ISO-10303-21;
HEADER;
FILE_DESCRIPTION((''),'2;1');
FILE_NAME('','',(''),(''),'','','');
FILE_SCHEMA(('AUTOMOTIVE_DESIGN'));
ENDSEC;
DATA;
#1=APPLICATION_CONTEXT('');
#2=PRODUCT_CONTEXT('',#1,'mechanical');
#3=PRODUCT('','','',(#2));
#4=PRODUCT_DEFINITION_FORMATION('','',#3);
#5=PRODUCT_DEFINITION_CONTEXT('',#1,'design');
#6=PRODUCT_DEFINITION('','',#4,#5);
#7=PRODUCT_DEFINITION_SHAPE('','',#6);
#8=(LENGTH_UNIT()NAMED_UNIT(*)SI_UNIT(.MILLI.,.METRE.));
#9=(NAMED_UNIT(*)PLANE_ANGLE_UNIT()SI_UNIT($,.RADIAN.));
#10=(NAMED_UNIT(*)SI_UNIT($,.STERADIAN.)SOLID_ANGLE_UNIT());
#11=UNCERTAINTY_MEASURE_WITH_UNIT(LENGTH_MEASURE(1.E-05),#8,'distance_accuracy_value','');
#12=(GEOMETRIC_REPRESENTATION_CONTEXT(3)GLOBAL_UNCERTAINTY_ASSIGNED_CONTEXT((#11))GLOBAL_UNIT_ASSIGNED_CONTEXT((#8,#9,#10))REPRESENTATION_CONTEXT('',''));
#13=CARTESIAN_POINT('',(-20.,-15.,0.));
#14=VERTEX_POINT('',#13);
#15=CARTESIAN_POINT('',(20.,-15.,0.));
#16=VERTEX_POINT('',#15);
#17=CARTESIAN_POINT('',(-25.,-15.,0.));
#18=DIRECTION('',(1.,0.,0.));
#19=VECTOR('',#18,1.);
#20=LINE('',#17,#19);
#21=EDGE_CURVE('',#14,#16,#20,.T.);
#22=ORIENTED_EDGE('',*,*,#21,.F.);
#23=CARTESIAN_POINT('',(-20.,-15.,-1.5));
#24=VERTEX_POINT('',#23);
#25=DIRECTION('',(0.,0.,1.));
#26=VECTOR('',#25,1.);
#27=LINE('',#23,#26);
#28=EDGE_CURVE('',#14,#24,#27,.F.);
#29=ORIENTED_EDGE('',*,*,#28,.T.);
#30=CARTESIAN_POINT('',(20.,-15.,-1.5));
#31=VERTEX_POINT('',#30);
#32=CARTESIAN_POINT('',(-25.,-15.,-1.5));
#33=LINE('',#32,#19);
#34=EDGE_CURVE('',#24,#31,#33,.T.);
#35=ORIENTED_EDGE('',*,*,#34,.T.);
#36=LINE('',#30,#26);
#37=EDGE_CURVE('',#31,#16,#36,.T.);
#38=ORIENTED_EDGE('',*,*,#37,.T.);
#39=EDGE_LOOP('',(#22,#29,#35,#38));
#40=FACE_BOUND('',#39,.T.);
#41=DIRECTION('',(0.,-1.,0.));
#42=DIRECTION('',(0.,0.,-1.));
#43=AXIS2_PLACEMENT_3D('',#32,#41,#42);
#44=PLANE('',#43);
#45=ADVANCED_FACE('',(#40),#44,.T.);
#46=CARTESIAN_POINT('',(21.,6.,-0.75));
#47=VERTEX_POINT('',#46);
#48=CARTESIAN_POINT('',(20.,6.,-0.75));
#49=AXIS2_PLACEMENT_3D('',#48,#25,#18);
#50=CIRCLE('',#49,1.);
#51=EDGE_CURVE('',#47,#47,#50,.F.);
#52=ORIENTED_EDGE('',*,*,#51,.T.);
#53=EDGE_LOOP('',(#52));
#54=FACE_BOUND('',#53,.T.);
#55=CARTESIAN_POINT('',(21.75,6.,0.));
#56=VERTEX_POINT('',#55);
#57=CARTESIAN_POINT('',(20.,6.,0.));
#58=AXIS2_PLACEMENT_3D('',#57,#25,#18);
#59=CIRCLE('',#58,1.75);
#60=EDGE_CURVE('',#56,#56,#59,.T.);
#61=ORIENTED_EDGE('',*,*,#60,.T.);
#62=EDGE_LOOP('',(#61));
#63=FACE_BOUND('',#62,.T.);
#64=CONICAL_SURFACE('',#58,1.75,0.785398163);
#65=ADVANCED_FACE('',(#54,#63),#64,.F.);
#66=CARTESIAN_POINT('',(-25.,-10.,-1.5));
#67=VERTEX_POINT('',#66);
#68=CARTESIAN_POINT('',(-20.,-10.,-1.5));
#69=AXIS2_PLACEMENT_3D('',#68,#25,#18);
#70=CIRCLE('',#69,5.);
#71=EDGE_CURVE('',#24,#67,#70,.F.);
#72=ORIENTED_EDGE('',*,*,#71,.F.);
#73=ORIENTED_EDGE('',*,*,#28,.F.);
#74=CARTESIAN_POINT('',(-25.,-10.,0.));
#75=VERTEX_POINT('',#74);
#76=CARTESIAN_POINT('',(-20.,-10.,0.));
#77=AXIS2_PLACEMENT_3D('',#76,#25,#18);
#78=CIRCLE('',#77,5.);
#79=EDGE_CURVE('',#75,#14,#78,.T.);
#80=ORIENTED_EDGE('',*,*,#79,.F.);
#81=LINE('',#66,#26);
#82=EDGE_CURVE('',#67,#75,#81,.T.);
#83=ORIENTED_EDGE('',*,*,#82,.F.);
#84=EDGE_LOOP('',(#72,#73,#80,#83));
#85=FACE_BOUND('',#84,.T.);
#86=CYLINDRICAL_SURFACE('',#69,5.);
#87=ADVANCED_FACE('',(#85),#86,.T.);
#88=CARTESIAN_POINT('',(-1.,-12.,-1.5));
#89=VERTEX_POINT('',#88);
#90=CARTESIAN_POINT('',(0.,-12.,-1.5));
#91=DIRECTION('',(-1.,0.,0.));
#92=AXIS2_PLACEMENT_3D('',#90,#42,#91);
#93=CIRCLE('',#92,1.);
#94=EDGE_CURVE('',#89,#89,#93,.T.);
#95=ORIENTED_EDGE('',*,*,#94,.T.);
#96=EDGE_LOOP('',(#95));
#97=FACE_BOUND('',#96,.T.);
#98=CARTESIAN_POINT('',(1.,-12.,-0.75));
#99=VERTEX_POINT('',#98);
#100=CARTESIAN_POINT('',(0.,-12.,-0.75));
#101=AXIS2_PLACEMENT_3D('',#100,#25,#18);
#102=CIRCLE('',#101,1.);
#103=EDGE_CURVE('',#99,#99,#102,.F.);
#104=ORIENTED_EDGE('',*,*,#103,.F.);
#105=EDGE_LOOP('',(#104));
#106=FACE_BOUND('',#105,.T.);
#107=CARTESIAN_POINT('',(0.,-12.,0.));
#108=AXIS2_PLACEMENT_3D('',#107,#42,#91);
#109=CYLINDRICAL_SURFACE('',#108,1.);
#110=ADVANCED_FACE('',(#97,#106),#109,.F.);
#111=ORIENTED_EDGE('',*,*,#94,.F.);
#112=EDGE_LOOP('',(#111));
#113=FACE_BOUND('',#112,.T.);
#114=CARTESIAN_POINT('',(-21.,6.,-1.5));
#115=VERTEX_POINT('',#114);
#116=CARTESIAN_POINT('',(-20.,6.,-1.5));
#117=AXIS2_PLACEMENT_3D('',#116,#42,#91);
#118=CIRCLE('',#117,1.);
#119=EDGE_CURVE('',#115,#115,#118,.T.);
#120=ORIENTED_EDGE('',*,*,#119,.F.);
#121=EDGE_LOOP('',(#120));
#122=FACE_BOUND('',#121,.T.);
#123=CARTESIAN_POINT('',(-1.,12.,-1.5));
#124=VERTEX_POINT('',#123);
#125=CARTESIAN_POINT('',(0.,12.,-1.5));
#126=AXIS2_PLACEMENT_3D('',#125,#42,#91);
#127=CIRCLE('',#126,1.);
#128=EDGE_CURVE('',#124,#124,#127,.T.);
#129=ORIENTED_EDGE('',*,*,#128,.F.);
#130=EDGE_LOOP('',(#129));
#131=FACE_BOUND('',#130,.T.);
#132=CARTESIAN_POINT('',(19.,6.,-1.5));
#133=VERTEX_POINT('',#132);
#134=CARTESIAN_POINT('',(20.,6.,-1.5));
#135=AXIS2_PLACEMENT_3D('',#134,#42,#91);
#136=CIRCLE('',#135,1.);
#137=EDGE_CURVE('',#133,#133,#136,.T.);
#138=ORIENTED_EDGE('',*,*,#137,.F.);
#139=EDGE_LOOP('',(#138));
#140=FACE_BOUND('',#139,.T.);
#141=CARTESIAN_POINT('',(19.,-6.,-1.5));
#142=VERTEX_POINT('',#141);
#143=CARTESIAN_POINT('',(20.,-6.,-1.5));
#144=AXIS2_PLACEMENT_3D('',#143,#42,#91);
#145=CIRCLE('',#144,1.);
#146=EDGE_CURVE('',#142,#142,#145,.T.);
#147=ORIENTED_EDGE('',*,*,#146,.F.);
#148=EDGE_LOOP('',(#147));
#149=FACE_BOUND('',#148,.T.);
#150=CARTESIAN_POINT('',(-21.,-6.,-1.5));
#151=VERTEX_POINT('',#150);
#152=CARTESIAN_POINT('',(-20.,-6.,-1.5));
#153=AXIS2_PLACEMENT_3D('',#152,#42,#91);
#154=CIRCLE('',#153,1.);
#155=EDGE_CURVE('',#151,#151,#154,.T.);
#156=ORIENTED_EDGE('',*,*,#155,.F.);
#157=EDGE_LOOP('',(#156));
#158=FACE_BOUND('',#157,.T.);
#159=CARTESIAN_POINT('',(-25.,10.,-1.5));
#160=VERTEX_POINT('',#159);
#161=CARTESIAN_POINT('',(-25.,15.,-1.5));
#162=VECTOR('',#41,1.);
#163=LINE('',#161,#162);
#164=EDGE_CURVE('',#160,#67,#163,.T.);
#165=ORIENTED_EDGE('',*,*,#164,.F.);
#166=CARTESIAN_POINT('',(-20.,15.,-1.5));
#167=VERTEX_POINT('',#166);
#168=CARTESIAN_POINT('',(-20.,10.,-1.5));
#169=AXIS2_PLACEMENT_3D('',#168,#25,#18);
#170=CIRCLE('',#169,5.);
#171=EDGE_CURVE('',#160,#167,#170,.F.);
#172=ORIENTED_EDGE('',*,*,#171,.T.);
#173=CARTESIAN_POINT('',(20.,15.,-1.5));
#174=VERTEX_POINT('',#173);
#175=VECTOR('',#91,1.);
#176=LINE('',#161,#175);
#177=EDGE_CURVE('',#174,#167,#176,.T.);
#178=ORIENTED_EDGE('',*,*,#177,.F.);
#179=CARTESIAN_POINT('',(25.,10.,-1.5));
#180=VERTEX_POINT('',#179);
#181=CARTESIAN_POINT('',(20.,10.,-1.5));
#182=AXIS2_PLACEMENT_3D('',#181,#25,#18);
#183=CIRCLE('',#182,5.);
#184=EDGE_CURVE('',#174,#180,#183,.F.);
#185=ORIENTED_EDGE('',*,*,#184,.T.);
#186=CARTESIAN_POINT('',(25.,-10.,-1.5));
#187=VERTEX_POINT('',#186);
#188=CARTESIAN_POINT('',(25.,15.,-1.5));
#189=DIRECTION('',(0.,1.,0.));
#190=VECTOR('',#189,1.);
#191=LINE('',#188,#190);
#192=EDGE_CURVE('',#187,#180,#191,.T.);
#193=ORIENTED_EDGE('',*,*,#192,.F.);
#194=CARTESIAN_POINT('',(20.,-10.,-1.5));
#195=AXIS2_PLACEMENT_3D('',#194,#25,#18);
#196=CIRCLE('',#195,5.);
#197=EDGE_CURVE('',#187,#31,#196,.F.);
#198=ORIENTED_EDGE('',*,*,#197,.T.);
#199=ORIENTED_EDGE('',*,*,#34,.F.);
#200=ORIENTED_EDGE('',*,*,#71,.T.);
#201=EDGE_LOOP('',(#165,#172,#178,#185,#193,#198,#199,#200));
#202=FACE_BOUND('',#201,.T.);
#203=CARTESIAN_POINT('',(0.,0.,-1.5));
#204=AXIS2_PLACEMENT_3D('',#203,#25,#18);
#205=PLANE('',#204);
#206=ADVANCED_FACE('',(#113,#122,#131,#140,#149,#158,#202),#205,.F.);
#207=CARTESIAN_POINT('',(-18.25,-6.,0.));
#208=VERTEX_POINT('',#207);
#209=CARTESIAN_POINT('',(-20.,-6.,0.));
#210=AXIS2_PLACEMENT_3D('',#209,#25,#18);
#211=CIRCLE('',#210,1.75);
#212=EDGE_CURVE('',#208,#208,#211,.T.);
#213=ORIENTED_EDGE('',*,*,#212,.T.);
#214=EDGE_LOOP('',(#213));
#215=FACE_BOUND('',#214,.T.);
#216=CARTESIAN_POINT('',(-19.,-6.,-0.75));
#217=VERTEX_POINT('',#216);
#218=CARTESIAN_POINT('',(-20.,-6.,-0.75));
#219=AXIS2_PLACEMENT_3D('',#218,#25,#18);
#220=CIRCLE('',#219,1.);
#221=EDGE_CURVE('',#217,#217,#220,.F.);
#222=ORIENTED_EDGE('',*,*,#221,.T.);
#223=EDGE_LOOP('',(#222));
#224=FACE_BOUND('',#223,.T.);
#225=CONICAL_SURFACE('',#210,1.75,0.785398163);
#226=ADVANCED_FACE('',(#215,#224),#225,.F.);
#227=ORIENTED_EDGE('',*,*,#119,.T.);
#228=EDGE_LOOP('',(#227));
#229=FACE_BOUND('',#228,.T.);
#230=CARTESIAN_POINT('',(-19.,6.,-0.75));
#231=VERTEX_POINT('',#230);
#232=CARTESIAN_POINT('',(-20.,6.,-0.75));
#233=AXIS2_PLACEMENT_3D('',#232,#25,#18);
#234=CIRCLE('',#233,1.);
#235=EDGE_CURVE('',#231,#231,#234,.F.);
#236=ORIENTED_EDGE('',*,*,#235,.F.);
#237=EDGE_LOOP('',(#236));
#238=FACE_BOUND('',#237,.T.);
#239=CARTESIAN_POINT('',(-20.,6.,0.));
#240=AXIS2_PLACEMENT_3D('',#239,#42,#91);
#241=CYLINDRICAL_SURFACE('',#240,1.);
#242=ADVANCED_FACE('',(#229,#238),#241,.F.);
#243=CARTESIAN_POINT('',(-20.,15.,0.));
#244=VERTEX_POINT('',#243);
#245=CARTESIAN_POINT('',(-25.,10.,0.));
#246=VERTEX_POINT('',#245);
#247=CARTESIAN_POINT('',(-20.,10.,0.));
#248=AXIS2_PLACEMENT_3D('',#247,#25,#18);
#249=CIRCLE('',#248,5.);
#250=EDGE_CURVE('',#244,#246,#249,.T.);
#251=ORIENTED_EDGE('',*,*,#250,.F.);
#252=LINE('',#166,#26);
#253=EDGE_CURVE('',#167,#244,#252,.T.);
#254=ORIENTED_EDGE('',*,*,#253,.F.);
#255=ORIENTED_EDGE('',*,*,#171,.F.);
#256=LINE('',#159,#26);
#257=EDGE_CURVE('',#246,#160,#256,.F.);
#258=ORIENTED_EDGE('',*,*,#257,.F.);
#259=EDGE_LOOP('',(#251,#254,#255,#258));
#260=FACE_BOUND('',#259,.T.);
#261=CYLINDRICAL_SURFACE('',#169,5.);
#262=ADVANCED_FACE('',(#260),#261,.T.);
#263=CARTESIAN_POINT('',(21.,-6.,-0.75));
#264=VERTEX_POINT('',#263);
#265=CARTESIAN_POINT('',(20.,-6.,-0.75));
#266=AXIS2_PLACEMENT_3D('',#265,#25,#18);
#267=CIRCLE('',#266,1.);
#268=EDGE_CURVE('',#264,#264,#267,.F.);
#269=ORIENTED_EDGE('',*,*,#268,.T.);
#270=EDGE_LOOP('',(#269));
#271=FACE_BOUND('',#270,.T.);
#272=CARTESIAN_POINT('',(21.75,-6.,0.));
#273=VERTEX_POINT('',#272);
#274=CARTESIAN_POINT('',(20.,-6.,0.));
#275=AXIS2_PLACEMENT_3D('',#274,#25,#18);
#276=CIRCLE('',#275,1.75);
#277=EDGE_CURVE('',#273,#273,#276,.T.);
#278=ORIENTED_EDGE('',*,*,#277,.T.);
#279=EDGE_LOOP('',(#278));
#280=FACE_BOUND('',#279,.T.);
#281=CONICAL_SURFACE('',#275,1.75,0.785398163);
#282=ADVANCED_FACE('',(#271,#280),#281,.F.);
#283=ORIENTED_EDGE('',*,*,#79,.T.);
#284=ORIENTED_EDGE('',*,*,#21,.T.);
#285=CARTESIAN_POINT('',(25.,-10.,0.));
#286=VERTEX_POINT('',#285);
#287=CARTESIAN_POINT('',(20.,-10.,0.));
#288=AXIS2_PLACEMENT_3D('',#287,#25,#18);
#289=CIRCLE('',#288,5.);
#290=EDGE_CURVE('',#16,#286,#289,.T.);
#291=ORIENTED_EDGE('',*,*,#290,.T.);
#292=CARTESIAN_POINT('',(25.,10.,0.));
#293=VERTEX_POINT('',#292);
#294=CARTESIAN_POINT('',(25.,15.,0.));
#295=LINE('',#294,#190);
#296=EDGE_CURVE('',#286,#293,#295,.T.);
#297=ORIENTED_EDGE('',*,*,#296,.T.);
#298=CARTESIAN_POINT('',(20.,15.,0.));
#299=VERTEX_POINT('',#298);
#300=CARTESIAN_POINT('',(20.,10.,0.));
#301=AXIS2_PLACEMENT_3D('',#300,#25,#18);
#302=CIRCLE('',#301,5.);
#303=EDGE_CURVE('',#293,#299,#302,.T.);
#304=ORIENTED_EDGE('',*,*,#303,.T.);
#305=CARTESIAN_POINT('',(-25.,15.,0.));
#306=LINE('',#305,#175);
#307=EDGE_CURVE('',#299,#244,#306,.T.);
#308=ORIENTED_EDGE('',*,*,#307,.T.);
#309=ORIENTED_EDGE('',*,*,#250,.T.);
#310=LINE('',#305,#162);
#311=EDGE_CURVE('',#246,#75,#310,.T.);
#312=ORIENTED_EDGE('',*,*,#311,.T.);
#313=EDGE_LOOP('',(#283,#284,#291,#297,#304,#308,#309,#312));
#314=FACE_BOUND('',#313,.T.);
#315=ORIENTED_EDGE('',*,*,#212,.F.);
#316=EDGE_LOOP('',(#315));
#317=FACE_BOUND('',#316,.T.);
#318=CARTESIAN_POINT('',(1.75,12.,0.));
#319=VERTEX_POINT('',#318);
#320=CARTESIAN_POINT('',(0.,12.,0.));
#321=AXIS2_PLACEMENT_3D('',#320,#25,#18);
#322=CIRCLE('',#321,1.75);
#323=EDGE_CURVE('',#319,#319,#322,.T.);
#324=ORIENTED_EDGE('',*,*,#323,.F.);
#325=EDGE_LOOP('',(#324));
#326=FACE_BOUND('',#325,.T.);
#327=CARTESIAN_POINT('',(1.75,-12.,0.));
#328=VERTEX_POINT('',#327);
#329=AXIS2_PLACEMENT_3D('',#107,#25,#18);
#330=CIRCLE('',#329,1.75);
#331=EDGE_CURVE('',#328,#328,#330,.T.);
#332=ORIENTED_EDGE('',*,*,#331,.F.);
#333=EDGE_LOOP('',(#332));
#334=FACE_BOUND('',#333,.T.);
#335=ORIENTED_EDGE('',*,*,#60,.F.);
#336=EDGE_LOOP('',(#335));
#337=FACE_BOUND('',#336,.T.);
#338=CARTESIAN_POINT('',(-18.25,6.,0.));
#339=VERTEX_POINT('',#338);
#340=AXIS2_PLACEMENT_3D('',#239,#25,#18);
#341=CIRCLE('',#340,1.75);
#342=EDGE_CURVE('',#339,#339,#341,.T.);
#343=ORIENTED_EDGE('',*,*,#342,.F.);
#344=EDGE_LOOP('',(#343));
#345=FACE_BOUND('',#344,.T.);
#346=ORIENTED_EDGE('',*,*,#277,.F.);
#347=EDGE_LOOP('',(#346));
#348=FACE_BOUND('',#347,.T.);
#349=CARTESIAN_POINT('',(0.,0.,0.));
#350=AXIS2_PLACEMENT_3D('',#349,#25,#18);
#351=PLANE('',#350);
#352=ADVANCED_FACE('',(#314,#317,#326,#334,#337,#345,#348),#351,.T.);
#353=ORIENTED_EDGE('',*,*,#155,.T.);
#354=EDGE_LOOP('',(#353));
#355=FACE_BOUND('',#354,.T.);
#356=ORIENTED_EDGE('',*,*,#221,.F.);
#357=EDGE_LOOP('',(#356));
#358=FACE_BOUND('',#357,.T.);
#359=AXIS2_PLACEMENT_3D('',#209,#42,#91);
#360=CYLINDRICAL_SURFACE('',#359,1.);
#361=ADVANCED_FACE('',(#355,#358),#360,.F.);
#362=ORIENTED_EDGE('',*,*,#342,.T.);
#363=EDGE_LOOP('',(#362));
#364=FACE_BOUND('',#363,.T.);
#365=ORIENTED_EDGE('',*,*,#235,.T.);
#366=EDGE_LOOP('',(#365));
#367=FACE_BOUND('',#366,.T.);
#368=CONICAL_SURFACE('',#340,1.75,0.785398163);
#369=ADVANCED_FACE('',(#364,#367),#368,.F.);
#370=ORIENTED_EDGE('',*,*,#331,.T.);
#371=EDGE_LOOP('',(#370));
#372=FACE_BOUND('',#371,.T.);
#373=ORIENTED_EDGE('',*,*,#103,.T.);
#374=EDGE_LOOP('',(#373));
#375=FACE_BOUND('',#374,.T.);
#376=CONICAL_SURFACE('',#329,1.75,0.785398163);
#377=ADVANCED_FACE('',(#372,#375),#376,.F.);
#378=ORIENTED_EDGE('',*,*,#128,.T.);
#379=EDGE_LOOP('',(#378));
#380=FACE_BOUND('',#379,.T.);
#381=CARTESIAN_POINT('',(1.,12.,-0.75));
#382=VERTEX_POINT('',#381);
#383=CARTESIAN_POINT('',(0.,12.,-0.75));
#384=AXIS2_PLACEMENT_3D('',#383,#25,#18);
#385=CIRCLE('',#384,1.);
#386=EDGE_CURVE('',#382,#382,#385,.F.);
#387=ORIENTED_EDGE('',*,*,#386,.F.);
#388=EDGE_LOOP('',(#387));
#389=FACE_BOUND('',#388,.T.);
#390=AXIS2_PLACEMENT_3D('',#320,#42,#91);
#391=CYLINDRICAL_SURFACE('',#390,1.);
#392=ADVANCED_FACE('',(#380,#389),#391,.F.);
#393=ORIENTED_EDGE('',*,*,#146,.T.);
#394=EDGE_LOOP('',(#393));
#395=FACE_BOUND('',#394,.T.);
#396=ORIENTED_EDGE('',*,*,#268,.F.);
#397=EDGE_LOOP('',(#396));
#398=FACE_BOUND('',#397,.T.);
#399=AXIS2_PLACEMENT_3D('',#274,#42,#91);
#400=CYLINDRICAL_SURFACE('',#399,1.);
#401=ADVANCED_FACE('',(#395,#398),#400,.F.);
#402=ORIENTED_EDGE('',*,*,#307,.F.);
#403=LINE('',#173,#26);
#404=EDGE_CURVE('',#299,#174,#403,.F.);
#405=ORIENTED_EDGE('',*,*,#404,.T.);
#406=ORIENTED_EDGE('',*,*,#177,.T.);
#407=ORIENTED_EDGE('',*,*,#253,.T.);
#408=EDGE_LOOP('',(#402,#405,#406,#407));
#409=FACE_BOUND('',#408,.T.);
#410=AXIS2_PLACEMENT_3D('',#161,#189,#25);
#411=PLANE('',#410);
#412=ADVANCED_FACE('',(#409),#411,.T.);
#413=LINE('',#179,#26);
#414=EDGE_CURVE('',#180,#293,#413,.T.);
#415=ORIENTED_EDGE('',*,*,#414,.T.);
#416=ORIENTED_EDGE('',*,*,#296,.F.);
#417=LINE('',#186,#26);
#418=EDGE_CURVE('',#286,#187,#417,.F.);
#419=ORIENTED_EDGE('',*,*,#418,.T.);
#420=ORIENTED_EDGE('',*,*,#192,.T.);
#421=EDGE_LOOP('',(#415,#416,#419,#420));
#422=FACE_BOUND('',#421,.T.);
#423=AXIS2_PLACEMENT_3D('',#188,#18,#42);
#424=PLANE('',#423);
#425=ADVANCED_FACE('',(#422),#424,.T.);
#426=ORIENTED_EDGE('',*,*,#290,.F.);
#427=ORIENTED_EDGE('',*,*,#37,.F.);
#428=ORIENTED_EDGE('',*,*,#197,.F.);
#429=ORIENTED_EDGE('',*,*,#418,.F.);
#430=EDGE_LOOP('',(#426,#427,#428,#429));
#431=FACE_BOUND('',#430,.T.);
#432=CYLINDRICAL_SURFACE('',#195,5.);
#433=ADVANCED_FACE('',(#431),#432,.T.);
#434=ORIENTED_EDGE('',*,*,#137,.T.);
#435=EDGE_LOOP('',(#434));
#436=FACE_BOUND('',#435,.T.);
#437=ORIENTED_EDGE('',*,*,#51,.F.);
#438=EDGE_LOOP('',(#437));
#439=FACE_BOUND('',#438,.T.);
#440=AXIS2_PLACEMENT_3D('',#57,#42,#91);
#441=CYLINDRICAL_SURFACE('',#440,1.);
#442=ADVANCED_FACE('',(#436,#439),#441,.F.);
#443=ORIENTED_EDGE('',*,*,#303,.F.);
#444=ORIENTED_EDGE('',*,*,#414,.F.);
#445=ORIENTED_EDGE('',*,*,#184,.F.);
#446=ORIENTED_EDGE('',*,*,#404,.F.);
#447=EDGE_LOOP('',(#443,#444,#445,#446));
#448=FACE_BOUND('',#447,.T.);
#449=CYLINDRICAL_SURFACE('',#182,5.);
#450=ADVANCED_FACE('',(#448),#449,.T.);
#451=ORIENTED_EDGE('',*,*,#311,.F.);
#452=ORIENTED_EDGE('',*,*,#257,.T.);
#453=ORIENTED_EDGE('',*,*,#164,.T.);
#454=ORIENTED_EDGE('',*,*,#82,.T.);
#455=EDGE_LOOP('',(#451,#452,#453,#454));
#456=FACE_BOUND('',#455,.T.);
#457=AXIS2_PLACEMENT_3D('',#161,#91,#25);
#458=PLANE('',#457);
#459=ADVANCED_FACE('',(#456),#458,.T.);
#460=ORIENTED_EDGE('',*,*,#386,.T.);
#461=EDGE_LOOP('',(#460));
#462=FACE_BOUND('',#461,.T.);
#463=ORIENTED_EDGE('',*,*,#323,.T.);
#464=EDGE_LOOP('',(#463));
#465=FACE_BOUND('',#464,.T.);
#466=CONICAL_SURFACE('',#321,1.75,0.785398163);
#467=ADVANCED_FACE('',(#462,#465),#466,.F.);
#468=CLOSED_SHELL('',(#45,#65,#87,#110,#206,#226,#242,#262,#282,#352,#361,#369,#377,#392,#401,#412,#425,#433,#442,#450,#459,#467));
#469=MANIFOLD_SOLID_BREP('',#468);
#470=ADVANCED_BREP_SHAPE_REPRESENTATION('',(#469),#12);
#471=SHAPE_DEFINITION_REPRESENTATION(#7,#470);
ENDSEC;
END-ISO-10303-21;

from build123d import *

# Parameters (mm, degrees)
SKIZZE1_W                                            = 50
SKIZZE1_H                                            = 30
BASIS_BLECH1_DEPTH                                   = 1.5
VERRUNDUNG1_R                                        = 5
FORMSENKUNG_F_R_M3_SENKSCHRAUBE_MIT_INNE_D           = 1.6
FORMSENKUNG_F_R_M3_SENKSCHRAUBE_MIT_INNE_DEPTH       = 8
FORMSENKUNG_F_R_M3_SENKSCHRAUBE_MIT_INNE_CSINK_D     = 3.5
FORMSENKUNG_F_R_M3_SENKSCHRAUBE_MIT_INNE_CSINK_ANGLE = 90
FORMSENKUNG_F_R_M3_SENKSCHRAUBE_MIT_INNE_TIP         = 0.480688495
SKIZZE8_R                                            = 1
SCHNITT_LINEAR_AUSTRAGEN1_DEPTH                      = 30.193321154


# Sheet-metal steps are written as plain solids
with BuildPart() as part:
    # Skizze1 → Basis-Blech1 (new body)
    with BuildSketch(Plane.XY):
        Rectangle(SKIZZE1_W, SKIZZE1_H)
    extrude(amount=-BASIS_BLECH1_DEPTH)

    # Verrundung1
    verrundung1_edges = [part.edges().sort_by_distance(p)[0] for p in [
        (-25, 15, -0.75),
        (25, 15, -0.75),
        (25, -15, -0.75),
        (-25, -15, -0.75),
    ]]
    fillet(verrundung1_edges, radius=VERRUNDUNG1_R)

    # Formsenkung für M3 Senkschraube mit Innensechskant2
    with Locations(Plane(origin=(-12.308549643, 4.902846213, 0), x_dir=(-1, 0, 0), z_dir=(0, 0, 1))):
        with Locations((-32.308549643, -1.097153787), (-12.308549643, -7.097153787), (7.691450357, -1.097153787), (7.691450357, 10.902846213), (-12.308549643, 16.902846213), (-32.308549643, 10.902846213)):
            CounterSinkHole(FORMSENKUNG_F_R_M3_SENKSCHRAUBE_MIT_INNE_D / 2, FORMSENKUNG_F_R_M3_SENKSCHRAUBE_MIT_INNE_CSINK_D / 2, depth=FORMSENKUNG_F_R_M3_SENKSCHRAUBE_MIT_INNE_DEPTH, counter_sink_angle=FORMSENKUNG_F_R_M3_SENKSCHRAUBE_MIT_INNE_CSINK_ANGLE)
            with Locations((0, 0, -(FORMSENKUNG_F_R_M3_SENKSCHRAUBE_MIT_INNE_DEPTH + FORMSENKUNG_F_R_M3_SENKSCHRAUBE_MIT_INNE_TIP / 2))):  # 118° drill point
                Cone(0, FORMSENKUNG_F_R_M3_SENKSCHRAUBE_MIT_INNE_D / 2, FORMSENKUNG_F_R_M3_SENKSCHRAUBE_MIT_INNE_TIP, mode=Mode.SUBTRACT)

    # Skizze8 → Schnitt-Linear austragen1 (cut, through all)
    with BuildSketch(Plane(origin=(0, 0, -1.5), x_dir=(-1, 0, 0), z_dir=(0, 0, -1))):
        with Locations((-20, 6)):
            Circle(SKIZZE8_R)
        with Locations((0, 12)):
            Circle(SKIZZE8_R)
        with Locations((20, 6)):
            Circle(SKIZZE8_R)
        with Locations((20, -6)):
            Circle(SKIZZE8_R)
        with Locations((0, -12)):
            Circle(SKIZZE8_R)
        with Locations((-20, -6)):
            Circle(SKIZZE8_R)
    extrude(amount=-SCHNITT_LINEAR_AUSTRAGEN1_DEPTH, mode=Mode.SUBTRACT)


solid = part.part
